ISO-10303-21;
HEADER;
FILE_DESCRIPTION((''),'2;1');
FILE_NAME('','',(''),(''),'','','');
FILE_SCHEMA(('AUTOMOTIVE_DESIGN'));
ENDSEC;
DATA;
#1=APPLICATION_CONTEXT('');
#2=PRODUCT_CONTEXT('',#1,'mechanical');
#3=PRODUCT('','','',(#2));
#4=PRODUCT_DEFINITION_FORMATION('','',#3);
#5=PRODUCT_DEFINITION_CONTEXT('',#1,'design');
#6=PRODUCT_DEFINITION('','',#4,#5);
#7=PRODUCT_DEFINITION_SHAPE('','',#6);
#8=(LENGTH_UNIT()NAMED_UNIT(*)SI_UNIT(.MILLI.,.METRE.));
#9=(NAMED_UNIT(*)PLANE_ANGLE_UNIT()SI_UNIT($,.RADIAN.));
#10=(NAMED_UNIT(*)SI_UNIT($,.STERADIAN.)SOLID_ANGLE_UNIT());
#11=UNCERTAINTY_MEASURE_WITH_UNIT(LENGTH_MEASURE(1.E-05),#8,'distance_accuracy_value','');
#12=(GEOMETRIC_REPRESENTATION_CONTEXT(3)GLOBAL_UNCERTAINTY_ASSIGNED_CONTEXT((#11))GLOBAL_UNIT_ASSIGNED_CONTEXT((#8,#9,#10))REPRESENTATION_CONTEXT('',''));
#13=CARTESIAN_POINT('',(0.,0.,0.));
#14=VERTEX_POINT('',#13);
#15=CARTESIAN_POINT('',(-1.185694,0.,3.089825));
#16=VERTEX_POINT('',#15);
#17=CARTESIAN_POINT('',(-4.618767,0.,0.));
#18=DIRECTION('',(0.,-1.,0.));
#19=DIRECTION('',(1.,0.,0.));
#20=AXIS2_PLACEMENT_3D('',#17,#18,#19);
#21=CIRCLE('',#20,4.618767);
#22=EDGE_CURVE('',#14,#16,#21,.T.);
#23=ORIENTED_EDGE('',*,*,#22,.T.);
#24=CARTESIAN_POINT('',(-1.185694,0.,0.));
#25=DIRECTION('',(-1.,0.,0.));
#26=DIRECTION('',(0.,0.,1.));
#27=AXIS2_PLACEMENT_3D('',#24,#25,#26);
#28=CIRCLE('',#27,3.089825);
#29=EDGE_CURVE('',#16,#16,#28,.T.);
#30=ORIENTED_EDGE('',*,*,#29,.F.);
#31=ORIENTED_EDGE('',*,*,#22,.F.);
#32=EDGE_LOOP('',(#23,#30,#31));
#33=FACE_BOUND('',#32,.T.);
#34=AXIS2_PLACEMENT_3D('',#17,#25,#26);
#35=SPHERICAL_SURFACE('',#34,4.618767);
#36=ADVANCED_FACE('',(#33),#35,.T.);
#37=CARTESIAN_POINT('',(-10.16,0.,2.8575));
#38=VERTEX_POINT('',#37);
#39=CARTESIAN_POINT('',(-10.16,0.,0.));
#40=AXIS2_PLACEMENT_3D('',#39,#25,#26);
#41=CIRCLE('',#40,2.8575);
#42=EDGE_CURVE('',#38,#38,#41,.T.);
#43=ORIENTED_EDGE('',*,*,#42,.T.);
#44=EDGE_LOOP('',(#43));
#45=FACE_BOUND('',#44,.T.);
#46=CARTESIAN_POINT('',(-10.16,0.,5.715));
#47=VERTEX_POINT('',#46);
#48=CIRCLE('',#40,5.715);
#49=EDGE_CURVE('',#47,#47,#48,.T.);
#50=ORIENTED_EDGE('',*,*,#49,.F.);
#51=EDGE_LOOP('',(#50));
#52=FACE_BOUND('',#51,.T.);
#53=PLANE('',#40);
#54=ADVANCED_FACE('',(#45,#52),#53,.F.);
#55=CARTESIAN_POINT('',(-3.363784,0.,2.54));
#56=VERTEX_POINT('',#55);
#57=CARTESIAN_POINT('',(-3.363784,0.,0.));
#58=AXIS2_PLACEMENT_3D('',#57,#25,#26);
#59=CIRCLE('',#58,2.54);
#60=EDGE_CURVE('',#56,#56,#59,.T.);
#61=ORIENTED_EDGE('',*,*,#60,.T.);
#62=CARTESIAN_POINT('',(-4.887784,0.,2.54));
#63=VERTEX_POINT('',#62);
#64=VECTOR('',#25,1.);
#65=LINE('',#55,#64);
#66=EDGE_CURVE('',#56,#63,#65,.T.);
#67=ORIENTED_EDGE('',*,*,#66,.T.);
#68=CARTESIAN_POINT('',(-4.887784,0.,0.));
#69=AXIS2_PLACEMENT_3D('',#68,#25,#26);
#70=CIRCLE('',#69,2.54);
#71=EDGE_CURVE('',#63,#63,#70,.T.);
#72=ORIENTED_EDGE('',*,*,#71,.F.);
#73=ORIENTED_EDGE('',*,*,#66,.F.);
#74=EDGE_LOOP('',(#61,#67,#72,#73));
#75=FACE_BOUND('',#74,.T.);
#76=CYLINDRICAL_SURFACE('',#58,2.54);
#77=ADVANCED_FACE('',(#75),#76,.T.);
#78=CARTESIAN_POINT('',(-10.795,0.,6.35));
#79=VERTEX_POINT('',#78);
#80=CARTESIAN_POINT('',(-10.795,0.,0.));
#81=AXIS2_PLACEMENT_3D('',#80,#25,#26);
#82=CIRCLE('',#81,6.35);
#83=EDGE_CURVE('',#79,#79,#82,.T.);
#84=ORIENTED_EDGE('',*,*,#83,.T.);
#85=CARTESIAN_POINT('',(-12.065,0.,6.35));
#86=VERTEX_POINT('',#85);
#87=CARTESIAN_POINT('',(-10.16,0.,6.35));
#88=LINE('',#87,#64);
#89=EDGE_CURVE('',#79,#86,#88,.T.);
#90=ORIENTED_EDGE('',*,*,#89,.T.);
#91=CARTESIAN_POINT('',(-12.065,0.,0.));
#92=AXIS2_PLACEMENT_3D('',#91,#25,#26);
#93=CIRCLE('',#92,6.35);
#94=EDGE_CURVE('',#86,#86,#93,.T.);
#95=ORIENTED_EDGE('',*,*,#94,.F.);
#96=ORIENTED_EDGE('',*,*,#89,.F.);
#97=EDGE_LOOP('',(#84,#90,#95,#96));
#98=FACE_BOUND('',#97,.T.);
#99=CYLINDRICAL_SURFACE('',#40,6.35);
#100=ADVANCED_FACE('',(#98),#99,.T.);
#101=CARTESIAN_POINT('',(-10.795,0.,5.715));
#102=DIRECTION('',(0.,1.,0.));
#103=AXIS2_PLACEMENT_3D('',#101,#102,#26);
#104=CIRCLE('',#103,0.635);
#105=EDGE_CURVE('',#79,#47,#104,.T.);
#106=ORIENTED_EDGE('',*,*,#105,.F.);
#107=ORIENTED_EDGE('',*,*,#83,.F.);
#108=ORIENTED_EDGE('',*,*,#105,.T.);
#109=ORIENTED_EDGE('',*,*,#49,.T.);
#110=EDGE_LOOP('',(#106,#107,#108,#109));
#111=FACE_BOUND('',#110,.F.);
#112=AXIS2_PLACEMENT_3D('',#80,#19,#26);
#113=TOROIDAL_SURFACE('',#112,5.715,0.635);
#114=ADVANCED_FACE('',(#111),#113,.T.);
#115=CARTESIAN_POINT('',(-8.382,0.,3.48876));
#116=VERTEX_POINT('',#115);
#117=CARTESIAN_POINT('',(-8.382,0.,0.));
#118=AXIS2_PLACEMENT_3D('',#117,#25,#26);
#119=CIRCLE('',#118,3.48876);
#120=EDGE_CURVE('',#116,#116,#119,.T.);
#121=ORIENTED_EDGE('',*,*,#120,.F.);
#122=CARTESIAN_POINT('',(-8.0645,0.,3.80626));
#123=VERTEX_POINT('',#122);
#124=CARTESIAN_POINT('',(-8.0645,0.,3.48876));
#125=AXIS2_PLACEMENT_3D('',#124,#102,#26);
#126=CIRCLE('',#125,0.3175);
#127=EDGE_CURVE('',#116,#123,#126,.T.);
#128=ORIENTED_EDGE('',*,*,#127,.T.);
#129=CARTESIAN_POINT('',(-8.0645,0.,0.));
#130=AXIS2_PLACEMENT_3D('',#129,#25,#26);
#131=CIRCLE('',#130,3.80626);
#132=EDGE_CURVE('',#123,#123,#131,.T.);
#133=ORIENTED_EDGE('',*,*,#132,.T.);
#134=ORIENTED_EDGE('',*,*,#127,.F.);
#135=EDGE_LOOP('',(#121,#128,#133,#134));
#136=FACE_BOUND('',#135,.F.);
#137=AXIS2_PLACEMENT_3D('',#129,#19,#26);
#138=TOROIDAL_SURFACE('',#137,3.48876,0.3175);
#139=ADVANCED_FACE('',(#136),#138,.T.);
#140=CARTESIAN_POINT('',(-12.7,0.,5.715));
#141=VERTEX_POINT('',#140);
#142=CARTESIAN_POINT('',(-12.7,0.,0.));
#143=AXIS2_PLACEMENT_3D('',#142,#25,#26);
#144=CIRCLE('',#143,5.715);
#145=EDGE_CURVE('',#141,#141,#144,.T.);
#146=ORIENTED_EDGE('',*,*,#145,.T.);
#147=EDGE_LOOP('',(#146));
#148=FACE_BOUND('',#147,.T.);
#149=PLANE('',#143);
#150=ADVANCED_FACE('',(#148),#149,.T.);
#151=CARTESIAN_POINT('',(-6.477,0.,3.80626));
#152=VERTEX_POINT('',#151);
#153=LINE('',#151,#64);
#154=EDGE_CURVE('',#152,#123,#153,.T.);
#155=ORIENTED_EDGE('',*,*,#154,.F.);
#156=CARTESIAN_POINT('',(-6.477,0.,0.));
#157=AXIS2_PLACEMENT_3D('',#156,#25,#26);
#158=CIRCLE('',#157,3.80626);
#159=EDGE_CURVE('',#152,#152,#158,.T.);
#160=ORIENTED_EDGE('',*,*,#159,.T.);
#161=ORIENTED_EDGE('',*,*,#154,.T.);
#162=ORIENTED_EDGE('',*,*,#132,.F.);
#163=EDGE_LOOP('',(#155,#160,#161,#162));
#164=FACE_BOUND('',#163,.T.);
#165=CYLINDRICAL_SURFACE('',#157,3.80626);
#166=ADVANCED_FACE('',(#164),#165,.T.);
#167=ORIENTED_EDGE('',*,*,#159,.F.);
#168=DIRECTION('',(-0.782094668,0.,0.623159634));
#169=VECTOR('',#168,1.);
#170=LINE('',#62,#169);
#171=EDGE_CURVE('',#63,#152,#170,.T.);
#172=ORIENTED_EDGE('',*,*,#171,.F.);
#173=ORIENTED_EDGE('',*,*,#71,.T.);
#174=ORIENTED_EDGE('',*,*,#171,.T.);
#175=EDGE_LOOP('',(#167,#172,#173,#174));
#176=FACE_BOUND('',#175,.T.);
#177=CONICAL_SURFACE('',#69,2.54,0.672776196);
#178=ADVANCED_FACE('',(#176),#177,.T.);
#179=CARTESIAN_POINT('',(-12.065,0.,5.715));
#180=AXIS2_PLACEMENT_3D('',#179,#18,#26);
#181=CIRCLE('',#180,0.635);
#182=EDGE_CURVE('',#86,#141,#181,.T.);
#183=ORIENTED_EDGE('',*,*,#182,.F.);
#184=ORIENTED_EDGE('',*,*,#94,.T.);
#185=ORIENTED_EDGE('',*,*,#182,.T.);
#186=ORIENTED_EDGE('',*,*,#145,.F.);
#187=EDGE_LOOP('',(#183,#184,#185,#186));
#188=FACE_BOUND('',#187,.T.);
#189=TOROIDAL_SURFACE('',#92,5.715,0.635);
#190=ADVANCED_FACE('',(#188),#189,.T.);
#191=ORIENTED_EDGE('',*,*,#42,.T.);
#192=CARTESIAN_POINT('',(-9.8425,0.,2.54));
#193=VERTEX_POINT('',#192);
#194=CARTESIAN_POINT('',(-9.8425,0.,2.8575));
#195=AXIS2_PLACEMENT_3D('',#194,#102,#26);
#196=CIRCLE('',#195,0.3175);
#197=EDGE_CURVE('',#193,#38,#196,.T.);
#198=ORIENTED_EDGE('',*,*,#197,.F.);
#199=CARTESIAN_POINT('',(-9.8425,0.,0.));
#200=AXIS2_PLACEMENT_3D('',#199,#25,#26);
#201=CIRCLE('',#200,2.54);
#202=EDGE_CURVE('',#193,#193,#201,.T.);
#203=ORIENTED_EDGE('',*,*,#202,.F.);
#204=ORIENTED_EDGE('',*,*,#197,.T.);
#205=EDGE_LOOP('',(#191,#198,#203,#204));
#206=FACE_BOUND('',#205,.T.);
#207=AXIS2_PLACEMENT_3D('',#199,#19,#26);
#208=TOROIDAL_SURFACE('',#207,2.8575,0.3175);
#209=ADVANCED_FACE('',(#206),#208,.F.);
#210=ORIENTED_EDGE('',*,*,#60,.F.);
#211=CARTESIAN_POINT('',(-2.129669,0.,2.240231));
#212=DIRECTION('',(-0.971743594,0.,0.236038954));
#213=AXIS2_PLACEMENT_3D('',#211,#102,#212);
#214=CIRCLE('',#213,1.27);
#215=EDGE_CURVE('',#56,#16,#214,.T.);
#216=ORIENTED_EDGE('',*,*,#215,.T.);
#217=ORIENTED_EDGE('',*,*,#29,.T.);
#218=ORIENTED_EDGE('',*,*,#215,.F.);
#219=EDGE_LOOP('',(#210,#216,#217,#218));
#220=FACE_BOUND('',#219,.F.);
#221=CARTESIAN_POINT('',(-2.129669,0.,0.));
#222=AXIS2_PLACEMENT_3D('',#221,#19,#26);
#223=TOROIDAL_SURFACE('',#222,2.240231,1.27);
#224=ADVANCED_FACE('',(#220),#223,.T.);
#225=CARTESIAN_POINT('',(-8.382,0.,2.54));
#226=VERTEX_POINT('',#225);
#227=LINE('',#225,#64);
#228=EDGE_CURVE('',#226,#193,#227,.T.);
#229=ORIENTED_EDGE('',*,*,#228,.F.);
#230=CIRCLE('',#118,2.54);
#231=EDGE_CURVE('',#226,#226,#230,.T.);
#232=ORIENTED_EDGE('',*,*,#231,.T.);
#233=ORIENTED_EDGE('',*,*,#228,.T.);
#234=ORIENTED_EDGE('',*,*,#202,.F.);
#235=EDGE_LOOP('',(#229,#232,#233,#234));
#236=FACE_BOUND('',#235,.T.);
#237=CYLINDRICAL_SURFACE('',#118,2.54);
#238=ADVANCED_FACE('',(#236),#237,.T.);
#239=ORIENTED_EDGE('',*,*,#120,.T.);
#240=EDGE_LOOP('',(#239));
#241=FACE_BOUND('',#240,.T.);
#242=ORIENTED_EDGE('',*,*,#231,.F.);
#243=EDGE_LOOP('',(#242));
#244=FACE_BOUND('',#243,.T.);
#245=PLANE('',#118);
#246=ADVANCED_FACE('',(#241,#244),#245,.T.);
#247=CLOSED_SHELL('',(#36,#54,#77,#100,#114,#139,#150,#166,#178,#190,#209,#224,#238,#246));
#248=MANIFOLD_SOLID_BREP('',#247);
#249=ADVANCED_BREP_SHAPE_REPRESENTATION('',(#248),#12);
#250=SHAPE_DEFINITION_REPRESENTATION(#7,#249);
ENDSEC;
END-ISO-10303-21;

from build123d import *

# Parameters (mm, degrees)
F2_R = 0.635
F3_R = 0.635
F4_R = 0.3175
F5_R = 0.3175


# Not quite as in the source:
# - a fillet or chamfer that OpenCascade refuses, or shapes differently, is made with other operations: its cross-section is extruded or revolved along the edge and cut away or added


with BuildPart() as f1:
    # F0 (on Front) → F1 (revolve)
    with BuildSketch(Plane.XZ):
        with BuildLine():
            Line((-12.7, 0), (0, 0))
            ThreePointArc((0, 0), (-0.9357326302, 2.7871609809), (-3.3637836337, 4.445))
            Line((-3.3637836337, 4.445), (-3.3637836337, 2.54))
            Line((-3.3637836337, 2.54), (-4.8877836337, 2.54))
            Line((-4.8877836337, 2.54), (-6.477, 3.8062603766))
            Line((-6.477, 3.8062603766), (-8.382, 3.8062603766))
            Line((-8.382, 3.8062603766), (-8.382, 2.54))
            Line((-8.382, 2.54), (-10.16, 2.54))
            Line((-10.16, 2.54), (-10.16, 6.35))
            Line((-10.16, 6.35), (-12.7, 6.35))
            Line((-12.7, 6.35), (-12.7, 0))
        make_face()
    revolve(axis=Axis((-6.35, 0, 0), (-1, 0, 0)))

    # F2
    f2_edges = [f1.edges().sort_by_distance(p)[0] for p in [
        (-12.7, 0, -6.35),
    ]]
    fillet(f2_edges, radius=F2_R)

    # F3
    f3_edges = [f1.edges().sort_by_distance(p)[0] for p in [
        (-10.16, 0, -6.35),
    ]]
    fillet(f3_edges, radius=F3_R)

    # F4
    f4_edges = [f1.edges().sort_by_distance(p)[0] for p in [
        (-8.382, 0, -3.80626),
    ]]
    fillet(f4_edges, radius=F4_R)

    # F5
    f5_edges = [f1.edges().sort_by_distance(p)[0] for p in [
        (-10.16, 0, -2.54),
    ]]
    fillet(f5_edges, radius=F5_R)

    # F6: fillet of radius 1.27 on 2 edges, made by hand

    # F6_s1 → F6_t2 (revolve, cut)
    with BuildSketch(Plane.XZ):
        with BuildLine():
            ThreePointArc((-3.3637836337, 2.54), (-2.4405099474, 3.4716029629), (-1.1856937405, 3.0898246668))
            ThreePointArc((-1.1856937405, 3.0898246668), (-2.1787682731, 3.9216596724), (-3.3637836337, 4.445))
            Line((-3.3637836337, 4.445), (-3.3637836337, 2.54))
        make_face()
    revolve(axis=Axis((-3.3637836337, 0, 0), (-1, 0, 0)), mode=Mode.SUBTRACT)


solid = f1.part
